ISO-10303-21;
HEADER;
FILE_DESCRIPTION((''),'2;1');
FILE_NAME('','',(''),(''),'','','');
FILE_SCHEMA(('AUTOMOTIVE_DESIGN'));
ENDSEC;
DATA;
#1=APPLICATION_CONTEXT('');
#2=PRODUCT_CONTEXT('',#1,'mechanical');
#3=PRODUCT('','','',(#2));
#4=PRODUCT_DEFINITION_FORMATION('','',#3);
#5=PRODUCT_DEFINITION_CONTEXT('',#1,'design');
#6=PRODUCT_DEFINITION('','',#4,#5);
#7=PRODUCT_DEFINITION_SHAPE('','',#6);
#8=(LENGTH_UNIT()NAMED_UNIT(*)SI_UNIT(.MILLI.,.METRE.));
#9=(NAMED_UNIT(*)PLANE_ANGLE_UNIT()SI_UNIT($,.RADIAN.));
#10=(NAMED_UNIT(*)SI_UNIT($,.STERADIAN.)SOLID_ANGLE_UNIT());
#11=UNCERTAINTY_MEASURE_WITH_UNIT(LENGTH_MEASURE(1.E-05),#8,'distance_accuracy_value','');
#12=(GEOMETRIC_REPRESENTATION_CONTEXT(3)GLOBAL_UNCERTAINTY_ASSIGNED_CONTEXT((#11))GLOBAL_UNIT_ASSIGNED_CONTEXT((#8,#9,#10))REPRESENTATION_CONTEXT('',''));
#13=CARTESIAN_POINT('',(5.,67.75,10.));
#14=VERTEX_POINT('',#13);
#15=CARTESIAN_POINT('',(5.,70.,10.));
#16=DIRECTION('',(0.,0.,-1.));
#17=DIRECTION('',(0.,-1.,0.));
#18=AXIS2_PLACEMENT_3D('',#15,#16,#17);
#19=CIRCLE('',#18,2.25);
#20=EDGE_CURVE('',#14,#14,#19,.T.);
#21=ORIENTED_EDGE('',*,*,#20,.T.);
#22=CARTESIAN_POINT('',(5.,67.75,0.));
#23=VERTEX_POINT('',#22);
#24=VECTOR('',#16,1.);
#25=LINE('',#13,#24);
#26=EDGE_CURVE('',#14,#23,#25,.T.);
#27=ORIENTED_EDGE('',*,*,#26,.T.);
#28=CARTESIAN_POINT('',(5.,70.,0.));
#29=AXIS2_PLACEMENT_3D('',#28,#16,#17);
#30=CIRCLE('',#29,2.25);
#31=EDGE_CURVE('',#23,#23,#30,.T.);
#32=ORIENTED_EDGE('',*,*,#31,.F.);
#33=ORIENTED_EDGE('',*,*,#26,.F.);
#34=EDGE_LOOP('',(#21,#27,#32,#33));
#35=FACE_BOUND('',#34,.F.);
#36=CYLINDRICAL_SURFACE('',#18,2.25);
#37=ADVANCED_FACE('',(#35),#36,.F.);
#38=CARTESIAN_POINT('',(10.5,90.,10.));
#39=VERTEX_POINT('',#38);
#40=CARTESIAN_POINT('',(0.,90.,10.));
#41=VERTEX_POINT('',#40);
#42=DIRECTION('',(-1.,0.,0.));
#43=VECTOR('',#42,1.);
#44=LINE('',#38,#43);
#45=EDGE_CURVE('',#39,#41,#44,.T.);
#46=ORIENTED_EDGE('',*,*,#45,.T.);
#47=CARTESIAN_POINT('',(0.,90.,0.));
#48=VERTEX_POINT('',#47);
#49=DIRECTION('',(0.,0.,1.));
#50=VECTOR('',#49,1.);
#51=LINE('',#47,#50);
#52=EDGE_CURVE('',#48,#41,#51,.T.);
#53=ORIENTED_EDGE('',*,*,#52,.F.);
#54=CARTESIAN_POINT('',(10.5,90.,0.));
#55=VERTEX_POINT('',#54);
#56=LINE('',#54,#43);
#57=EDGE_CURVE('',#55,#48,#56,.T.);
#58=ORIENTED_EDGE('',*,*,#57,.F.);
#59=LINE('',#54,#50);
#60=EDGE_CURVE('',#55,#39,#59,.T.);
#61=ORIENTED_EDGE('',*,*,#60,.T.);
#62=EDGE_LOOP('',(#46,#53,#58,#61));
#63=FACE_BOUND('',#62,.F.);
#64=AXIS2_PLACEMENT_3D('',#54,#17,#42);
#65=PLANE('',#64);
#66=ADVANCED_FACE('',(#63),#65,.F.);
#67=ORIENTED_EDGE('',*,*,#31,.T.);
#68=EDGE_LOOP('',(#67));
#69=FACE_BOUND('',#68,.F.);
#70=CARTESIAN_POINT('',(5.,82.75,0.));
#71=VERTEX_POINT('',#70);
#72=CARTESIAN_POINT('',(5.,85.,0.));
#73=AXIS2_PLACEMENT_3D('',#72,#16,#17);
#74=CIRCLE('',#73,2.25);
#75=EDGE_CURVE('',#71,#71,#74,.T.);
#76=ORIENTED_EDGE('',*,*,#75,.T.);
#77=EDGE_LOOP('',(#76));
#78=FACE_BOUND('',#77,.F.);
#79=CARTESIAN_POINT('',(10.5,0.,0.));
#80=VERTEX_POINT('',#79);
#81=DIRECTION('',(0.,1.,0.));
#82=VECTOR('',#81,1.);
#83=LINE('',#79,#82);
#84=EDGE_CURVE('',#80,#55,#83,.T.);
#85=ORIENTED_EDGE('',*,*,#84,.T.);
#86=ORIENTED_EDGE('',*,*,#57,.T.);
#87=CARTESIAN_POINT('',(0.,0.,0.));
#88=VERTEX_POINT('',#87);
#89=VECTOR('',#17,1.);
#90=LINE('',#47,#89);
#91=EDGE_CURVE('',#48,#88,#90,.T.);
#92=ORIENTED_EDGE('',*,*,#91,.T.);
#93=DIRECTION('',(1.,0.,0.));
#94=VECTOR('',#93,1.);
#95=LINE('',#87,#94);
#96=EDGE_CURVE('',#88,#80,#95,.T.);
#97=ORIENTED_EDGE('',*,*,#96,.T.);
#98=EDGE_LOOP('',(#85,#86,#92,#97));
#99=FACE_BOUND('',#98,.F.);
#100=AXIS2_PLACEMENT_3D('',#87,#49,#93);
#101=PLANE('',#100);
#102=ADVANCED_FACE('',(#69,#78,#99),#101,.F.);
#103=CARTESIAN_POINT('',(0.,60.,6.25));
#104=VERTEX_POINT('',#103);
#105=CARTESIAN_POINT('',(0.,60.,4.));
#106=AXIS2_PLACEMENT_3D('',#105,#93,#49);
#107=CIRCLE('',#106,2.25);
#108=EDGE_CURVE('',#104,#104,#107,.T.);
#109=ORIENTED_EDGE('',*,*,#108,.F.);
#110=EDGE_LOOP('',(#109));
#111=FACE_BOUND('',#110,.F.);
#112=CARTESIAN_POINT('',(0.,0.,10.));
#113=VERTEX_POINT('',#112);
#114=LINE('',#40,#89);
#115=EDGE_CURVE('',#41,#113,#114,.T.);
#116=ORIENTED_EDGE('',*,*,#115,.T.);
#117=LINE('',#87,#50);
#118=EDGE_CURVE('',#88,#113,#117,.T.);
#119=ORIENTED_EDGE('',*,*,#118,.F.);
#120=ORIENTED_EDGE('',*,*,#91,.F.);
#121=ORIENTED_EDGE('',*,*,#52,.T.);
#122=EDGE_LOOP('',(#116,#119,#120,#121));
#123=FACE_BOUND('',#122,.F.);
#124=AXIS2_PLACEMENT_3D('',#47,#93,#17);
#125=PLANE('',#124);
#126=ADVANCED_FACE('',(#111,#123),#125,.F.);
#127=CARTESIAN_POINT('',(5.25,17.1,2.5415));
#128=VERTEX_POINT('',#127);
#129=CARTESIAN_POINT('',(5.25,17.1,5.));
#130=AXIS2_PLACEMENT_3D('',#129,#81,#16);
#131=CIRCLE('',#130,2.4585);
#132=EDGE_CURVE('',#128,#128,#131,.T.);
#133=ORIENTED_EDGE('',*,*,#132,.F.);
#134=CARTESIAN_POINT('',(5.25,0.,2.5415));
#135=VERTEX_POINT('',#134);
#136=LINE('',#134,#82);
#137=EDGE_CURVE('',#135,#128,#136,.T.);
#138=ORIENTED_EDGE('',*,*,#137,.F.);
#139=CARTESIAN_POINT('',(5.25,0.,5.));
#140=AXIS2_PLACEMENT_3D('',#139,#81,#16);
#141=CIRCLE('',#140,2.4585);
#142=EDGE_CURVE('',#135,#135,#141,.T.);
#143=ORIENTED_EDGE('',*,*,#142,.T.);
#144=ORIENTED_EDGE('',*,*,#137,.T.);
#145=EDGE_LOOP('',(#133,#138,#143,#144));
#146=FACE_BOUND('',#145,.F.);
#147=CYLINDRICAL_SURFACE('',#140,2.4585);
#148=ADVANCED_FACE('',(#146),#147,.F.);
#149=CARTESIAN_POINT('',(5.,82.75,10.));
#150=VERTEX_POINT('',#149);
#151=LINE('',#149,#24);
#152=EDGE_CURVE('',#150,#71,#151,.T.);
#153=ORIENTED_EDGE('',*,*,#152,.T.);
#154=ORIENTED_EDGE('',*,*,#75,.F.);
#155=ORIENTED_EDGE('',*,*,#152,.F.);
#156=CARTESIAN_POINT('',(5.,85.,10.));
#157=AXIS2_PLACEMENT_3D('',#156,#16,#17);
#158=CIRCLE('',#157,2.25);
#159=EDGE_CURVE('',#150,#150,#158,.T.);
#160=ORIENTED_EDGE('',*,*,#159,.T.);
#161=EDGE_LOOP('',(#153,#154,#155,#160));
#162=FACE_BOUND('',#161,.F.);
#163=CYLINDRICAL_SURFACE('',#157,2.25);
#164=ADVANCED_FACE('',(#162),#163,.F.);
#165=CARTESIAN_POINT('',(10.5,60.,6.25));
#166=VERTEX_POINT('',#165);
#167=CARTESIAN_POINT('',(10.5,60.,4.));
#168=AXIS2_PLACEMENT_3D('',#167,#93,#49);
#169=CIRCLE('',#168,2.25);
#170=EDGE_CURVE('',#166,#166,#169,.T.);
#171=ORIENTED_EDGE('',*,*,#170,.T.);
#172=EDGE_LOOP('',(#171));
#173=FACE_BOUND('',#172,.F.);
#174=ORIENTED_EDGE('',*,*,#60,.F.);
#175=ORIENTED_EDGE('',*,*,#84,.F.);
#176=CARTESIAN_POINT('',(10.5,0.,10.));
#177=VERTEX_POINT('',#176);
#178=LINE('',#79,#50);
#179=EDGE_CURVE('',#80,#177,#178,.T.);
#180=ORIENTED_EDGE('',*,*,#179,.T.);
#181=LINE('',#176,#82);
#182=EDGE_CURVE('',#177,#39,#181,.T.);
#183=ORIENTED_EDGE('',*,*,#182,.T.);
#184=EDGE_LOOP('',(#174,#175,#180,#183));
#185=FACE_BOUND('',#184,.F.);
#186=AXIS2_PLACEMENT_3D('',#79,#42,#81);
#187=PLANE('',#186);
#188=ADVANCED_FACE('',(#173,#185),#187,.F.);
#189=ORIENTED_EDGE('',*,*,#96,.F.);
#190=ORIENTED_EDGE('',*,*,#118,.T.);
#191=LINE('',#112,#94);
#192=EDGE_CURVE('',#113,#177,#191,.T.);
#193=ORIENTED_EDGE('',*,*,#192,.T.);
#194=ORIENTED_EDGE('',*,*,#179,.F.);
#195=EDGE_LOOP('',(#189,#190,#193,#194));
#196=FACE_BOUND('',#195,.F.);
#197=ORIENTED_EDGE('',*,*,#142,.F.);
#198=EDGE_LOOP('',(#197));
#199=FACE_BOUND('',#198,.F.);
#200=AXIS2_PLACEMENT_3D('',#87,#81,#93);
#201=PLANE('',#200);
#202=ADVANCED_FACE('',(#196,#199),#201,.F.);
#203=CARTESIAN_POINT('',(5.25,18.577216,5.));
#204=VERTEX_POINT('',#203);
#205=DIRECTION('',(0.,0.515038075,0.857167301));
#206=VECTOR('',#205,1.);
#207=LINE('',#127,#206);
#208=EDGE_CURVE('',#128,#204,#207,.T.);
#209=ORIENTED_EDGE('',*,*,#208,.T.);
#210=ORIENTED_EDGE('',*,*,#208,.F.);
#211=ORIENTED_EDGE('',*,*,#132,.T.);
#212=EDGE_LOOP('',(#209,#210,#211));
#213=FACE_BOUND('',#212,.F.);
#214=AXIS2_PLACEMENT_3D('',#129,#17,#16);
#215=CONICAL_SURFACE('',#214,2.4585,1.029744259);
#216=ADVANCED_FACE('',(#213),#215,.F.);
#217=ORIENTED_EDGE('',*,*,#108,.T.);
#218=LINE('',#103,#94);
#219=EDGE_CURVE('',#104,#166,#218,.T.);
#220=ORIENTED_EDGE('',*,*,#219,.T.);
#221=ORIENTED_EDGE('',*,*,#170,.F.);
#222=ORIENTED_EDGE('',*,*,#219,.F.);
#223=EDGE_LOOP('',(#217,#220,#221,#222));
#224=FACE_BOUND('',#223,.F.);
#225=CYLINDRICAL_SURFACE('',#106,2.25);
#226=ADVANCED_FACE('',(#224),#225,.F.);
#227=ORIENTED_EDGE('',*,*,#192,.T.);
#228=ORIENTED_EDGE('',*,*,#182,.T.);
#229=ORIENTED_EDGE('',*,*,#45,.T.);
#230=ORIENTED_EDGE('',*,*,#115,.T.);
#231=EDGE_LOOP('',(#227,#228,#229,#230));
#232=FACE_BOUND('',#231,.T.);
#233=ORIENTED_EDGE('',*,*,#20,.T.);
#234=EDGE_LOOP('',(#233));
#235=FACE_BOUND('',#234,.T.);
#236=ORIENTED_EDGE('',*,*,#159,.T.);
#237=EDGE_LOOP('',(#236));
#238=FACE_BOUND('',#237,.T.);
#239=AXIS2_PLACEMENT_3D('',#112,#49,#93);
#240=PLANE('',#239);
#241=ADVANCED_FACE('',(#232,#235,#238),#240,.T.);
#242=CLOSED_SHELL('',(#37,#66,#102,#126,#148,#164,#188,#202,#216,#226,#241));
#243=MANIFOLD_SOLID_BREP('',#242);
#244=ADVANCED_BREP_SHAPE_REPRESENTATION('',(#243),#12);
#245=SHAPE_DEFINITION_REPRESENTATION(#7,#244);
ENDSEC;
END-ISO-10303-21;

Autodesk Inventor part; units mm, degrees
ref_plane "YZ Plane" through (0, 0, 0) normal (1, 0, 0) x (0, 1, 0)
ref_plane "XZ Plane" through (0, 0, 0) normal (0, 1, 0) x (-1, 0, 0)
ref_plane "XY Plane" through (0, 0, 0) normal (0, 0, 1) x (1, 0, 0)
sketch "Sketch1" plane through (0, 0, 0) normal (0, 0, 1) x (1, 0, 0)
  line L0 (0, 0) -> (10.5, 0)
  line L1 (10.5, 0) -> (10.5, 90)
  line L2 (10.5, 90) -> (0, 90)
  line L3 (0, 90) -> (0, 0)
  dimension "d0" = 10.5
  dimension "d1" = 90
extrude "Extrusion1" add sketch "Sketch1" along normal blind 10
sketch "Sketch4" plane through (0, 0, 10) normal (0, 0, 1) x (1, 0, 0)
  line L0 (0, 90) -> (0, 0) projected
  line L1 (10.5, 0) -> (10.5, 90) projected
  line L2 (10.5, 90) -> (0, 90) projected
  line L3 (0, 0) -> (10.5, 0) projected
  point P0 (0, 30)
  point P1 (0, 45)
sketch "Sketch5" plane through (0, 0, 0) normal (-1, 0, 0) x (0, 0, 1)
  circle A0 centre (4, 60) radius 2.5
  line L0 (0, 90) -> (0, 0) projected
  line L1 (0, 90) -> (10, 90) projected
  line L2 (0, 0) -> (10, 0) projected
  point P0 (5, 0)
  point P1 (5, 90)
  dimension "d15" = 5
  dimension "d24" = 4
  dimension "d40" = 30
hole "Hole2" at (0, 60, 4) direction (1, 0, 0) diameter 4.5 end through all clearance for "Countersunk Flat Head Screw ISO 2009/7046" size "M4" standard "ISO"
sketch "Sketch6" plane through (0, 0, 0) normal (0, -1, 0) x (1, 0, 0)
  line L0 (10.5, 6.25) -> (0, 6.25) projected
  line L1 (0, 0) -> (10.5, 0) construction
  line L2 (10.5, 0) -> (10.5, 10) construction
  line L3 (0, 10) -> (10.5, 10) construction
  line L4 (0, 0) -> (0, 10) construction
  point P0 (5.25, 5)
  dimension "d26" = 10
  dimension "d27" = 10.5
  dimension "d29" = 5
  dimension "d30" = 5.25
hole "Hole3" at (5.25, 0, 5) direction (0, 1, 0) diameter 4.917 depth 17.1 tip angle 118 thread size "M6x1" class "6H" standard "ISO Metric profile"
sketch "Sketch8" plane through (0, 0, 10) normal (0, 0, 1) x (1, 0, 0)
  line L0 (0, 90) -> (0, 0) projected
  line L1 (10.5, 90) -> (0, 90) projected
  point P0 (5, 85)
  point P1 (5, 70)
  dimension "d42" = 5
  dimension "d43" = 5
  dimension "d44" = 5
  dimension "d45" = 15
hole "Hole4" at (5, 85, 10) at (5, 70, 10) direction (0, 0, -1) diameter 4.5 end through all clearance for "Countersunk Flat Head Screw ISO 2009/7046" size "M4" standard "ISO"
equation "\"d29\" = 0.5 * d26"
equation "\"d30\" = 0.5 * d27"
equation "\"d43\" = d42"
properties part number "Flange"
